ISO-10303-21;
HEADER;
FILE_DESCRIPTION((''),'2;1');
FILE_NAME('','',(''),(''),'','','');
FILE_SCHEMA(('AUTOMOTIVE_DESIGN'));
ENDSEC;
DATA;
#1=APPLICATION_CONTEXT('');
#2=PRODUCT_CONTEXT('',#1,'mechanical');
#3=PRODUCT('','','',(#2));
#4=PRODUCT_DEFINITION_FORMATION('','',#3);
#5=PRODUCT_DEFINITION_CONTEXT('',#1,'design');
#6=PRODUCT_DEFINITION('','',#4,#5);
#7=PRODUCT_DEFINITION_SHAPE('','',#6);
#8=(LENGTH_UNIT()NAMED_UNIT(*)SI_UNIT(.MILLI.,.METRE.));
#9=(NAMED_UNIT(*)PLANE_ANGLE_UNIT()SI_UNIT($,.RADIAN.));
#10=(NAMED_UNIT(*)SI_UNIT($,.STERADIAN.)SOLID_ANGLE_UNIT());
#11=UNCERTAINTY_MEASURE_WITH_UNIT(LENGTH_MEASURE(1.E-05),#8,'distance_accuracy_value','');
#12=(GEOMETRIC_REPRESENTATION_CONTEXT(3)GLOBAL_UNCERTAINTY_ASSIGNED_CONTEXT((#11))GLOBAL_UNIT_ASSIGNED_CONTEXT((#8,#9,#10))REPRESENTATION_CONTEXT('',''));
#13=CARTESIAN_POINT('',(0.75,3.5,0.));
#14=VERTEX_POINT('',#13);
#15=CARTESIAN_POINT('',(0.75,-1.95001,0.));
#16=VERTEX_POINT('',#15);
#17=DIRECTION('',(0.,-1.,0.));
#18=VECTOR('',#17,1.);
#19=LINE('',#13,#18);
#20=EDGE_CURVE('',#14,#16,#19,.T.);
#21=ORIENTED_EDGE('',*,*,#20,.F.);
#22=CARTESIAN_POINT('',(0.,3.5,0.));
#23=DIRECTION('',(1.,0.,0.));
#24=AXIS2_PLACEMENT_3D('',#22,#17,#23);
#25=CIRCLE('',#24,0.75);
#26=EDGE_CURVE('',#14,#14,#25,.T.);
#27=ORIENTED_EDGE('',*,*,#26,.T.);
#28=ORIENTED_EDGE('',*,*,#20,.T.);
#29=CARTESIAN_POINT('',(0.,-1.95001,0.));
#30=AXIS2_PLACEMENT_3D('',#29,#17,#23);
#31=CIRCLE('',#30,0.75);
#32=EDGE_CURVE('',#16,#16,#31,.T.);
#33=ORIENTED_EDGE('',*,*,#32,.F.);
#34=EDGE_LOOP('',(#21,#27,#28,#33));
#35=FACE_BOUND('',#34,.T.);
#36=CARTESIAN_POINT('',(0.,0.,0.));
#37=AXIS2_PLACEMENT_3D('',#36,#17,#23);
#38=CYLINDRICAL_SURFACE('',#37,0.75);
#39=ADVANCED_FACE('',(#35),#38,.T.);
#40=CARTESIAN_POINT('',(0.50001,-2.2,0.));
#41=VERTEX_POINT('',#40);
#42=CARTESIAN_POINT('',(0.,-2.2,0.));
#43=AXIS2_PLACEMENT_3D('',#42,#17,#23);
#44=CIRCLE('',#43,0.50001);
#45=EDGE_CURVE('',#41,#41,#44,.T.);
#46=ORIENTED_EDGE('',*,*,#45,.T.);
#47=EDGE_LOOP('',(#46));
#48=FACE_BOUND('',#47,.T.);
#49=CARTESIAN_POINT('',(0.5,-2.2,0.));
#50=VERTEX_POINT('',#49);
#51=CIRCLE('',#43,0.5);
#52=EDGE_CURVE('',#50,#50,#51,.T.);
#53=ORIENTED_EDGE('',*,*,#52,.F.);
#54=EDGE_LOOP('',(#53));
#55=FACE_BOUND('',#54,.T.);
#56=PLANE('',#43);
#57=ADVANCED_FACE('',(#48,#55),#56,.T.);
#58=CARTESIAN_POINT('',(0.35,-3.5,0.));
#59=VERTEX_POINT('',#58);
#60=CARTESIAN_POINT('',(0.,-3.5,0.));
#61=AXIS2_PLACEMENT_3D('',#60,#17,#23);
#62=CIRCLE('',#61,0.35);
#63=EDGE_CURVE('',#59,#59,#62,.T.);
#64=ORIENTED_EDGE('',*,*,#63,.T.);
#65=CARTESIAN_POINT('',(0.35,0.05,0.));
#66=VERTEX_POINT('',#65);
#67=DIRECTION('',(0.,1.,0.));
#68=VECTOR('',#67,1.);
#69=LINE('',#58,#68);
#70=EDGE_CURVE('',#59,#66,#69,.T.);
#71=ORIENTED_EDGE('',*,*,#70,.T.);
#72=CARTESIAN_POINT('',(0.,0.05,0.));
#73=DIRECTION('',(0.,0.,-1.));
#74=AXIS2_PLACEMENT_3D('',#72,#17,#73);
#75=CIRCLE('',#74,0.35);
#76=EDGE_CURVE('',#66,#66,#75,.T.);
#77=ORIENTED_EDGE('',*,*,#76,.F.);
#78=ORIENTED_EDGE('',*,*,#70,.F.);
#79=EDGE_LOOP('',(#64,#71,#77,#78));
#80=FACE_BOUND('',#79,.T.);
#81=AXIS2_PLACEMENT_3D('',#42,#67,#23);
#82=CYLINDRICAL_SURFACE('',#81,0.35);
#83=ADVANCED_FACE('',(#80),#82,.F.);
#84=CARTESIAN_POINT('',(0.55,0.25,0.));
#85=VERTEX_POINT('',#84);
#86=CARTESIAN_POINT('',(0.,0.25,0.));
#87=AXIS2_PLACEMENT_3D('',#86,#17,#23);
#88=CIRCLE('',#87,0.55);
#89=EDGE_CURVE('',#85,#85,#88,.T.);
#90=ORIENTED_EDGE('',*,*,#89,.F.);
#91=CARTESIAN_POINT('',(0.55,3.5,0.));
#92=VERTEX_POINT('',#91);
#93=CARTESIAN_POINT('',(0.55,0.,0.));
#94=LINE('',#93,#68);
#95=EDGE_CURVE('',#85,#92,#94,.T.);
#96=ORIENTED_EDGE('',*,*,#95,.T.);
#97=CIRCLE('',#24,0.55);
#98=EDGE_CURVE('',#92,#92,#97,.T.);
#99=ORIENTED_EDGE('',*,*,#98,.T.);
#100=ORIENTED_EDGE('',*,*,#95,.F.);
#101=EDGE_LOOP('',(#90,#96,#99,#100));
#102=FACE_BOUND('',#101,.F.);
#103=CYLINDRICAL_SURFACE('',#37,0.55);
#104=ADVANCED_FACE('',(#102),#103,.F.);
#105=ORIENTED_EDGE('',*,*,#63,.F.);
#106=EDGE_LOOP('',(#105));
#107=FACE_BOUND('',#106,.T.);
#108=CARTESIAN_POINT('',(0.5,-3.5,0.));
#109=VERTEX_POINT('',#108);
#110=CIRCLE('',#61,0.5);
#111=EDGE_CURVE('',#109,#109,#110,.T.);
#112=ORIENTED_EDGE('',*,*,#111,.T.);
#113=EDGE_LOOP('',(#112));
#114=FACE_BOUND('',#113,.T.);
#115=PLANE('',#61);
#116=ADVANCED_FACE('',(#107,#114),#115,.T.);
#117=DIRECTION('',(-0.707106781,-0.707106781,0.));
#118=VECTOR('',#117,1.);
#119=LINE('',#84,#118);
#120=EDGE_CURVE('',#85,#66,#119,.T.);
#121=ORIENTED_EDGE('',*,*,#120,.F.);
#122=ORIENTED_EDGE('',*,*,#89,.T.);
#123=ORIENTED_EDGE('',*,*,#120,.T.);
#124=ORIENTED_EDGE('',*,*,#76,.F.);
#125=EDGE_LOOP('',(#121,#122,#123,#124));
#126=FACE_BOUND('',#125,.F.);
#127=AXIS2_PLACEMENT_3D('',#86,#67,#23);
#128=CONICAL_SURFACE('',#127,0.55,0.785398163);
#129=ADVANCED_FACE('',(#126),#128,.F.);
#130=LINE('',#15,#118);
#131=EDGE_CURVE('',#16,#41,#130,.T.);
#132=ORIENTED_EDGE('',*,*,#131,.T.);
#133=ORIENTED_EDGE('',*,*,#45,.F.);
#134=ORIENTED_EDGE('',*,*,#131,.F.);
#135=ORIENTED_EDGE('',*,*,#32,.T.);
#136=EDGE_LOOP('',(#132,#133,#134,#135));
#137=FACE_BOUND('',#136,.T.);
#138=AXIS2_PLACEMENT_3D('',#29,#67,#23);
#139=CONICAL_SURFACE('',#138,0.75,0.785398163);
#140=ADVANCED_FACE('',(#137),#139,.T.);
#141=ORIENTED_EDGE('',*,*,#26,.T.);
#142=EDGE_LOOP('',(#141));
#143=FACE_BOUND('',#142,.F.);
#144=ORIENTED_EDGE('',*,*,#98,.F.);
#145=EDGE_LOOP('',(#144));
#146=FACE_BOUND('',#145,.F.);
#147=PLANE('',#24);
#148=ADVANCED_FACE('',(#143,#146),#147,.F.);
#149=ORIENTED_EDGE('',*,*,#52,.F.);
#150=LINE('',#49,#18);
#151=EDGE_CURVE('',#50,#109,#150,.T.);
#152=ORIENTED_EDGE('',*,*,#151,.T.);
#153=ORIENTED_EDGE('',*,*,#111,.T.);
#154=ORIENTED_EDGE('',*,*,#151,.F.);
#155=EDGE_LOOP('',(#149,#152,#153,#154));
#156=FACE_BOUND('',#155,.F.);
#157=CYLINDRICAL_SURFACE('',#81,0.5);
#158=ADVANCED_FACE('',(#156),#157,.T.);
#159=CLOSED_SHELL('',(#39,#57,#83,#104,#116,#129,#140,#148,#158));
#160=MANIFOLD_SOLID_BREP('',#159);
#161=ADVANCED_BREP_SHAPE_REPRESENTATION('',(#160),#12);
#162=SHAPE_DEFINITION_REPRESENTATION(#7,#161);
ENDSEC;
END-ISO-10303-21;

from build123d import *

# Parameters (mm, degrees)
F0_R        = 0.75
F1_DEPTH    = 2.2
F2_DEPTH    = 3.5
F3_R        = 0.55
F4_DEPTH    = 5
F5_R        = 0.35
F6_DEPTH    = 5
F7_S5_R     = 0.35
F7_T6_DEPTH = 2
F8_R        = 0.5
F8_R_2      = 0.35
F9_DEPTH    = 1.3
F10_SIZE    = 0.24999


# Not quite as in the source:
# - a fillet or chamfer that OpenCascade refuses, or shapes differently, is made with other operations: its cross-section is extruded or revolved along the edge and cut away or added
# - a fillet or chamfer is up to 0.001 mm smaller than in the source, because OpenCascade refuses the exact size


with BuildPart() as f1:
    # F0 (on Front) → F1 (new body)
    with BuildSketch(Plane.XZ):
        Circle(F0_R)
    extrude(amount=F1_DEPTH)

    # F2 (add): a face of the model
    f2_faces = [f1.faces().sort_by_distance(p)[0] for p in [
        (0, 0, 0),
    ]]
    extrude(f2_faces, amount=F2_DEPTH)

    # F3 (on Front) → F4 (cut)
    with BuildSketch(Plane.XZ):
        Circle(F3_R)
    extrude(amount=-F4_DEPTH, mode=Mode.SUBTRACT)

    # F5 (on Front) → F6 (cut)
    with BuildSketch(Plane.XZ):
        Circle(F5_R)
    extrude(amount=F6_DEPTH, mode=Mode.SUBTRACT)

    # F7: chamfer of 0.25 on 1 edges, made by hand


with BuildPart() as f7_tool2:
    # F7_s3 → F7_t4 (revolve)
    with BuildSketch(Plane.XY):
        Polygon((0.55, 0.25), (0.3, 0), (0.55, 0), align=None)
    revolve(axis=Axis((0, 0, 0), (0, -1, 0)))

    # F7_s5 → F7_t6 (cut, symmetric)
    with BuildSketch(Plane.XZ.offset(-0.1)):
        Circle(F7_S5_R)
    extrude(amount=F7_T6_DEPTH, both=True, mode=Mode.SUBTRACT)


with BuildPart() as f1_1:
    add(f1.part)

    # F7_t1: union F7_tool2
    add(f7_tool2.part)

    # F8 (on face) → F9 (join)
    with BuildSketch(Plane.XZ.offset(2.2)):
        Circle(F8_R)
        Circle(F8_R_2, mode=Mode.SUBTRACT)
    extrude(amount=F9_DEPTH)

    # F10 (size 0.25 in the source; OpenCascade refuses exactly that, so slightly less here)
    f10_edges = [f1_1.edges().sort_by_distance(p)[0] for p in [
        (-0.75, -2.2, 0),
    ]]
    chamfer(f10_edges, length=F10_SIZE)


solid = f1_1.part
